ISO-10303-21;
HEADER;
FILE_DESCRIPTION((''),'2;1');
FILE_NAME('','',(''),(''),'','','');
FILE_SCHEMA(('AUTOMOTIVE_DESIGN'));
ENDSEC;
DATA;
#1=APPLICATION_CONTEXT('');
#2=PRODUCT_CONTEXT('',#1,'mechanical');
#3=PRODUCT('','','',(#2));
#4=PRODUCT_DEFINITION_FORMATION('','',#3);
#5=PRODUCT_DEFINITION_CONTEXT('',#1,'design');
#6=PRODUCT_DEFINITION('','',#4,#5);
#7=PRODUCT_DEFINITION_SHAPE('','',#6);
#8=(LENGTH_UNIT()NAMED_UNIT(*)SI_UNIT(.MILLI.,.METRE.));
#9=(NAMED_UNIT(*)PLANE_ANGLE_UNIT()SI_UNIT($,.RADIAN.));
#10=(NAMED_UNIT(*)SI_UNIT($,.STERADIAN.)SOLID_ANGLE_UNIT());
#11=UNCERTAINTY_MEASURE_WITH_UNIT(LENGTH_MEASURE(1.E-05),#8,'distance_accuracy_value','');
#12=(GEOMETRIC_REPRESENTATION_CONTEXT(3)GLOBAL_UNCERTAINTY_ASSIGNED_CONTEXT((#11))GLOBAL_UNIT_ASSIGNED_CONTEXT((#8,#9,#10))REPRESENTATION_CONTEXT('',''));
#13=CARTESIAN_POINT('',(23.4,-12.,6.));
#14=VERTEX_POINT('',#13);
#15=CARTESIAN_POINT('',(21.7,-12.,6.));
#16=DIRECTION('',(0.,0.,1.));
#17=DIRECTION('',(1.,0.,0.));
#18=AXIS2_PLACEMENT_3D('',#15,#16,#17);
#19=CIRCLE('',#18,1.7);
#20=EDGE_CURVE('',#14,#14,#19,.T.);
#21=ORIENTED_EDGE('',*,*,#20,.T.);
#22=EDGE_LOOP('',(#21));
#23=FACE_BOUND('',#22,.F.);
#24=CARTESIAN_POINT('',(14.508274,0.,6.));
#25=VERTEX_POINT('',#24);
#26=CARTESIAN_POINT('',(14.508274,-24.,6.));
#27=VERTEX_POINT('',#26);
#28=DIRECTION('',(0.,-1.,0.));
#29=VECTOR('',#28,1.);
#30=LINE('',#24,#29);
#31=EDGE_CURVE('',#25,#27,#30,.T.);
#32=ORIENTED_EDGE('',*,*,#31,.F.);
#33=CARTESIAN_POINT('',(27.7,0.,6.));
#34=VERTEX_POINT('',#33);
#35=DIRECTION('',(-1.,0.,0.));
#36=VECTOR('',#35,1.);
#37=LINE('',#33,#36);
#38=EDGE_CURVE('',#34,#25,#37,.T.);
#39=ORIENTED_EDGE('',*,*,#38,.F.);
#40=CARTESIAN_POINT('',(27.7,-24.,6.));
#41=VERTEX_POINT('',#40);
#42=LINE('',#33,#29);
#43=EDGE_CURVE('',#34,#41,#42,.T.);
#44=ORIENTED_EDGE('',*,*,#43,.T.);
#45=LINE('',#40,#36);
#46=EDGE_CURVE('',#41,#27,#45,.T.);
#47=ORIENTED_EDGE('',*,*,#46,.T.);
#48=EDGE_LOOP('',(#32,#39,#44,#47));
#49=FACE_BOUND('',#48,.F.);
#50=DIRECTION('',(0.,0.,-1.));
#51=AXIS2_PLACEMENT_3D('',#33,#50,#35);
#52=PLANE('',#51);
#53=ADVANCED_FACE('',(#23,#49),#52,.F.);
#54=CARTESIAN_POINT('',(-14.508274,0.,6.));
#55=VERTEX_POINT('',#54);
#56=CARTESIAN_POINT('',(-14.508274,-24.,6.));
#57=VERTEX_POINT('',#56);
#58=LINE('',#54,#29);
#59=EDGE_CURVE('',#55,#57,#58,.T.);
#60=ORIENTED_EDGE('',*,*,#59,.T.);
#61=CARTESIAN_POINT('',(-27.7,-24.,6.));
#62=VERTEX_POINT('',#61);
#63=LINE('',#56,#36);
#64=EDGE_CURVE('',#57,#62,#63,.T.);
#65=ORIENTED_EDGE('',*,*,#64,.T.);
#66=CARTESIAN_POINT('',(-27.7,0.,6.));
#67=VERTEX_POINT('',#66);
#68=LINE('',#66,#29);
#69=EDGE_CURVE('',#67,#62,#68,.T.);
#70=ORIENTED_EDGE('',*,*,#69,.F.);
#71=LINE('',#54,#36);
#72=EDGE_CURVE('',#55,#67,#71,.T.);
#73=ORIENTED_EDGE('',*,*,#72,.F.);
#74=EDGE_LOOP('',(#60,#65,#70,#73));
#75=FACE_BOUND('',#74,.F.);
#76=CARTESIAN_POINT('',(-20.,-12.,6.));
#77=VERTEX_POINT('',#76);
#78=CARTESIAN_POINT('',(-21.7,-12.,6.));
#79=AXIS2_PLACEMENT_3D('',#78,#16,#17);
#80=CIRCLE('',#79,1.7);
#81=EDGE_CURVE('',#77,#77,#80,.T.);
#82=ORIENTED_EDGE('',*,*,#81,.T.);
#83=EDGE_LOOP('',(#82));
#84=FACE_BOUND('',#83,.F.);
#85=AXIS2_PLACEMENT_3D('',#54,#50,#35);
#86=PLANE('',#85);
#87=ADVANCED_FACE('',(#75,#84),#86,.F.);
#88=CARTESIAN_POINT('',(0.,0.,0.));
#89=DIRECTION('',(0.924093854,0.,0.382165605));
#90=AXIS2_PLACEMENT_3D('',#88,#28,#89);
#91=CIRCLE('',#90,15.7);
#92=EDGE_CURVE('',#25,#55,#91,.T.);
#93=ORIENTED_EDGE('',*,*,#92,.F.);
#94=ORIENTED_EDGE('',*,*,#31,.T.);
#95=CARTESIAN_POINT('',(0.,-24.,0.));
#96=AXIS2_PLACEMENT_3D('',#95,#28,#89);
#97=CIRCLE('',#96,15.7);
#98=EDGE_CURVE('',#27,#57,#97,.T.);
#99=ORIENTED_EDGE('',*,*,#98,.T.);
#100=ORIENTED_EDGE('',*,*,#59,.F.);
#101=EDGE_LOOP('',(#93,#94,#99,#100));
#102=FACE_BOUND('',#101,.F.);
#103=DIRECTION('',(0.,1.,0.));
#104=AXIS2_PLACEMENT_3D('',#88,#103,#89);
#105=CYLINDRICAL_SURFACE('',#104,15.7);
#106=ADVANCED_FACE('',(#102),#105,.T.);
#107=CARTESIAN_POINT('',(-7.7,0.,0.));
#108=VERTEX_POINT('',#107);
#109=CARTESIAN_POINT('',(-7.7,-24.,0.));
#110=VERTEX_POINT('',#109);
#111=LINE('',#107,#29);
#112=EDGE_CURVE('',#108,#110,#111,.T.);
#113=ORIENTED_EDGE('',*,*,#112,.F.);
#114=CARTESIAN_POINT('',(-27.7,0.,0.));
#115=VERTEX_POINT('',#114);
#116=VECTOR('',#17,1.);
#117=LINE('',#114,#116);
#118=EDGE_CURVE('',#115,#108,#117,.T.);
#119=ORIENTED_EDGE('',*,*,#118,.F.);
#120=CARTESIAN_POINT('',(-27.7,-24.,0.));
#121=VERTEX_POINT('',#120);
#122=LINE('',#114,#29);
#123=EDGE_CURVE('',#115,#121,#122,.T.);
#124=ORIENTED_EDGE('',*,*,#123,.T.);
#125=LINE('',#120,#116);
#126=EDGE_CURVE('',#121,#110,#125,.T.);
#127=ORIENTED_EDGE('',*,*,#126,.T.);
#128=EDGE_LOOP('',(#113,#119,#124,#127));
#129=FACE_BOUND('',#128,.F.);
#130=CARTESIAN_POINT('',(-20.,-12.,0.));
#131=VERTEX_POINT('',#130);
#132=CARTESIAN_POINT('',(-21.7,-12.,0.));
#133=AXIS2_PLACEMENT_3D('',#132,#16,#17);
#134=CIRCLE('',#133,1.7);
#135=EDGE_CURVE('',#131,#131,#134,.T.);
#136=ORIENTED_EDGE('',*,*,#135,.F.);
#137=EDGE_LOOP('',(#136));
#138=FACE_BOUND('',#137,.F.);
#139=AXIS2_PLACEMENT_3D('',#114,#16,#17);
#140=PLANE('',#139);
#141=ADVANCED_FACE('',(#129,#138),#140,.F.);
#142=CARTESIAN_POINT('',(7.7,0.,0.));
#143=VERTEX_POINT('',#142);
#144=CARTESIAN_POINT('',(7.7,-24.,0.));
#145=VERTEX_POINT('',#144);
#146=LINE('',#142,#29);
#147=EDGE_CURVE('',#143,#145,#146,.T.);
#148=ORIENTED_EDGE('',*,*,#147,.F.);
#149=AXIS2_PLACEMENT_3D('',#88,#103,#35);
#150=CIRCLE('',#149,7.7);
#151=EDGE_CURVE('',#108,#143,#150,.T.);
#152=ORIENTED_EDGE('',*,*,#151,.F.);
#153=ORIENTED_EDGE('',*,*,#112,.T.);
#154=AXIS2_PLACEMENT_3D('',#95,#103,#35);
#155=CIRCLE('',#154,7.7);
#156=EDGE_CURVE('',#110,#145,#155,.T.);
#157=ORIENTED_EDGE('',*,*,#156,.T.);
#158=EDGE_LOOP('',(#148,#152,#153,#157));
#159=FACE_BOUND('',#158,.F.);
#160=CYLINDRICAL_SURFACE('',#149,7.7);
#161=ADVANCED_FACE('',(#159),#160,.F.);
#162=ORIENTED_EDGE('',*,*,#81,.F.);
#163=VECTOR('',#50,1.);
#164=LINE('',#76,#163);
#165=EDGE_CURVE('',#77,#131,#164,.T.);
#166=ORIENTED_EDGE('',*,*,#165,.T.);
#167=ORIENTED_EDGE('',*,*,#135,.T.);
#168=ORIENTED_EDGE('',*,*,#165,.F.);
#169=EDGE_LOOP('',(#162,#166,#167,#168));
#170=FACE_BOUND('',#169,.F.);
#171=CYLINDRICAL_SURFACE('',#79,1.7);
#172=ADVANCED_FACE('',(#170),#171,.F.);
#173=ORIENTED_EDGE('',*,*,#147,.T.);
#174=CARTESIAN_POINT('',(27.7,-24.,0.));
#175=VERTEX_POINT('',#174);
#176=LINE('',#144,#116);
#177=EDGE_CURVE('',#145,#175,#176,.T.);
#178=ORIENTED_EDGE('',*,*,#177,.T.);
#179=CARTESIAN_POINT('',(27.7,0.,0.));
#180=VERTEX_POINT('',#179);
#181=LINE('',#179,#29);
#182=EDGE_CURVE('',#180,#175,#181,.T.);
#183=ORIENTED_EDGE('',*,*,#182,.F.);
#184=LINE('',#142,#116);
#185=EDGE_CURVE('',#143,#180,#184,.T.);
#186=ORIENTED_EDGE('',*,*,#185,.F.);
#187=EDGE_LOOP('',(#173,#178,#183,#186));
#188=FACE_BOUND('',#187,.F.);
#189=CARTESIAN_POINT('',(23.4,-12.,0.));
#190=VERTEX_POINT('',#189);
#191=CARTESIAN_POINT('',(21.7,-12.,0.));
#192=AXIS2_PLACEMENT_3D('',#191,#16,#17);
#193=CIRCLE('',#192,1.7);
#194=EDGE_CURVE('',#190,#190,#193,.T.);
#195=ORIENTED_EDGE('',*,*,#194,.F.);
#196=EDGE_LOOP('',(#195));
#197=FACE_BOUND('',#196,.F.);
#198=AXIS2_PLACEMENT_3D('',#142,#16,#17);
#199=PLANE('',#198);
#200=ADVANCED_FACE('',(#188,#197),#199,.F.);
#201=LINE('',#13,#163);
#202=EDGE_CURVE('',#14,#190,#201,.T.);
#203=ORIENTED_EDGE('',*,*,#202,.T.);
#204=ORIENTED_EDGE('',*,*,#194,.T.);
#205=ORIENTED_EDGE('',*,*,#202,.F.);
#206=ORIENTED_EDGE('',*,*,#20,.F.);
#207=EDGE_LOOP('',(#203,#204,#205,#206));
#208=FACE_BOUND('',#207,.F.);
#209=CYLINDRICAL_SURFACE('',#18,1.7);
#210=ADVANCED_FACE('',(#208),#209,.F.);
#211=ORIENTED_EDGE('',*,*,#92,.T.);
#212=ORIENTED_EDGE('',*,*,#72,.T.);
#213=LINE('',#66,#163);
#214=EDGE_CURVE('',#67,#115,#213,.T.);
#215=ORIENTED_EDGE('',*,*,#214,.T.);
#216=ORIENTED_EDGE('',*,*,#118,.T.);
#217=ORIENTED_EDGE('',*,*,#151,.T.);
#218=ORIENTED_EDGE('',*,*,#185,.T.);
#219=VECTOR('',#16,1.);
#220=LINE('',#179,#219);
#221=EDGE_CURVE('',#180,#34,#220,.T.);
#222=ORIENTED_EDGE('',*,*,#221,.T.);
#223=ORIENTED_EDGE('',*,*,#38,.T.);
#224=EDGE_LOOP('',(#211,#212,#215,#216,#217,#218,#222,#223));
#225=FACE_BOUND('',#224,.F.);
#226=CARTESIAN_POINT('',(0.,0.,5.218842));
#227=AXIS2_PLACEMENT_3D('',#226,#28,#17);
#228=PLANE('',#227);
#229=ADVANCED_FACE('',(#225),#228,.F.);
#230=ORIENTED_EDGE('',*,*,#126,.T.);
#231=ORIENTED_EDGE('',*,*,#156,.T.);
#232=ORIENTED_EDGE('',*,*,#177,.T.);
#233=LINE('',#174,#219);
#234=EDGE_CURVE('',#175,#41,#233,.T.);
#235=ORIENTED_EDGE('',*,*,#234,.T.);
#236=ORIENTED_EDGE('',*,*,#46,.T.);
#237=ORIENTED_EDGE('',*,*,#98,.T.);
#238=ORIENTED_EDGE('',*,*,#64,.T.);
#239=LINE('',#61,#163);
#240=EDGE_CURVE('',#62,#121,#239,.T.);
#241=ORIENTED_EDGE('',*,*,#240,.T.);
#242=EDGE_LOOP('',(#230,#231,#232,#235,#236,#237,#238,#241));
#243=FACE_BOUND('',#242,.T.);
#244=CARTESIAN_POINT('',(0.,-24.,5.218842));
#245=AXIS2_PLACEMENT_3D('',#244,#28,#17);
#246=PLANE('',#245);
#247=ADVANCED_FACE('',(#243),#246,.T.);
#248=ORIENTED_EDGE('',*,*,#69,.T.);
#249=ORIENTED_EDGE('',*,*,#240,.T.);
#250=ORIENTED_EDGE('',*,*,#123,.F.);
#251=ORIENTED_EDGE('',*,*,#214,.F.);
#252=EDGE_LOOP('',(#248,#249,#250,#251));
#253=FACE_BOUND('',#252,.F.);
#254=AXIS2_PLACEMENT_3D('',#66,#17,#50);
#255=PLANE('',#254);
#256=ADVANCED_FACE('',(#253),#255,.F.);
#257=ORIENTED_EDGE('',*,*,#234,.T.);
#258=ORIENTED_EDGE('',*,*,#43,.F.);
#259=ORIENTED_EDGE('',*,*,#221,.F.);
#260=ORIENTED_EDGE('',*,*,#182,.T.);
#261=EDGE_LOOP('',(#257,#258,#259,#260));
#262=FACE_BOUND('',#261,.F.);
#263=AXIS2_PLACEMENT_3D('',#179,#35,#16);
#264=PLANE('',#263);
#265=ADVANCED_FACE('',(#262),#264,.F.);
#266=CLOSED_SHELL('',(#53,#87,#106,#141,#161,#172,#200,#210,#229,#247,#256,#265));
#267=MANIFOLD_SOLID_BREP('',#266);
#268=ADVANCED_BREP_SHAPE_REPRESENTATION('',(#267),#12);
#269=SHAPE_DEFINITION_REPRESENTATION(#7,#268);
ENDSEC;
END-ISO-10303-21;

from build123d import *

# Parameters (mm, degrees)
F1_DEPTH = 24
F2_R     = 1.7
F3_DEPTH = 25


# Not quite as in the source:
# - a feature names something its author has since deleted; it is built from what else it names


with BuildPart() as f1:
    # F0 (on Front) → F1 (new body)
    with BuildSketch(Plane.XZ):
        with BuildLine():
            ThreePointArc((-7.7, 0), (0, 7.7), (7.7, 0))
            Line((7.7, 0), (15.7, 0))
            Line((15.7, 0), (27.7, 0))
            Line((27.7, 0), (27.7, 6))
            Line((27.7, 6), (14.5082735017, 6))
            ThreePointArc((14.5082735017, 6), (0, 15.7), (-14.5082735017, 6))
            Line((-14.5082735017, 6), (-27.7, 6))
            Line((-27.7, 6), (-27.7, 0))
            Line((-27.7, 0), (-15.7, 0))
            Line((-15.7, 0), (-7.7, 0))
        make_face()
    extrude(amount=F1_DEPTH)

    # F2 (on face) → F3 (cut)
    with BuildSketch(Plane.XY.offset(6)):
        with Locations((-21.7, -12)):
            Circle(F2_R)
        with Locations((21.7, -12)):
            Circle(F2_R)
    extrude(amount=-F3_DEPTH, mode=Mode.SUBTRACT)


solid = f1.part
